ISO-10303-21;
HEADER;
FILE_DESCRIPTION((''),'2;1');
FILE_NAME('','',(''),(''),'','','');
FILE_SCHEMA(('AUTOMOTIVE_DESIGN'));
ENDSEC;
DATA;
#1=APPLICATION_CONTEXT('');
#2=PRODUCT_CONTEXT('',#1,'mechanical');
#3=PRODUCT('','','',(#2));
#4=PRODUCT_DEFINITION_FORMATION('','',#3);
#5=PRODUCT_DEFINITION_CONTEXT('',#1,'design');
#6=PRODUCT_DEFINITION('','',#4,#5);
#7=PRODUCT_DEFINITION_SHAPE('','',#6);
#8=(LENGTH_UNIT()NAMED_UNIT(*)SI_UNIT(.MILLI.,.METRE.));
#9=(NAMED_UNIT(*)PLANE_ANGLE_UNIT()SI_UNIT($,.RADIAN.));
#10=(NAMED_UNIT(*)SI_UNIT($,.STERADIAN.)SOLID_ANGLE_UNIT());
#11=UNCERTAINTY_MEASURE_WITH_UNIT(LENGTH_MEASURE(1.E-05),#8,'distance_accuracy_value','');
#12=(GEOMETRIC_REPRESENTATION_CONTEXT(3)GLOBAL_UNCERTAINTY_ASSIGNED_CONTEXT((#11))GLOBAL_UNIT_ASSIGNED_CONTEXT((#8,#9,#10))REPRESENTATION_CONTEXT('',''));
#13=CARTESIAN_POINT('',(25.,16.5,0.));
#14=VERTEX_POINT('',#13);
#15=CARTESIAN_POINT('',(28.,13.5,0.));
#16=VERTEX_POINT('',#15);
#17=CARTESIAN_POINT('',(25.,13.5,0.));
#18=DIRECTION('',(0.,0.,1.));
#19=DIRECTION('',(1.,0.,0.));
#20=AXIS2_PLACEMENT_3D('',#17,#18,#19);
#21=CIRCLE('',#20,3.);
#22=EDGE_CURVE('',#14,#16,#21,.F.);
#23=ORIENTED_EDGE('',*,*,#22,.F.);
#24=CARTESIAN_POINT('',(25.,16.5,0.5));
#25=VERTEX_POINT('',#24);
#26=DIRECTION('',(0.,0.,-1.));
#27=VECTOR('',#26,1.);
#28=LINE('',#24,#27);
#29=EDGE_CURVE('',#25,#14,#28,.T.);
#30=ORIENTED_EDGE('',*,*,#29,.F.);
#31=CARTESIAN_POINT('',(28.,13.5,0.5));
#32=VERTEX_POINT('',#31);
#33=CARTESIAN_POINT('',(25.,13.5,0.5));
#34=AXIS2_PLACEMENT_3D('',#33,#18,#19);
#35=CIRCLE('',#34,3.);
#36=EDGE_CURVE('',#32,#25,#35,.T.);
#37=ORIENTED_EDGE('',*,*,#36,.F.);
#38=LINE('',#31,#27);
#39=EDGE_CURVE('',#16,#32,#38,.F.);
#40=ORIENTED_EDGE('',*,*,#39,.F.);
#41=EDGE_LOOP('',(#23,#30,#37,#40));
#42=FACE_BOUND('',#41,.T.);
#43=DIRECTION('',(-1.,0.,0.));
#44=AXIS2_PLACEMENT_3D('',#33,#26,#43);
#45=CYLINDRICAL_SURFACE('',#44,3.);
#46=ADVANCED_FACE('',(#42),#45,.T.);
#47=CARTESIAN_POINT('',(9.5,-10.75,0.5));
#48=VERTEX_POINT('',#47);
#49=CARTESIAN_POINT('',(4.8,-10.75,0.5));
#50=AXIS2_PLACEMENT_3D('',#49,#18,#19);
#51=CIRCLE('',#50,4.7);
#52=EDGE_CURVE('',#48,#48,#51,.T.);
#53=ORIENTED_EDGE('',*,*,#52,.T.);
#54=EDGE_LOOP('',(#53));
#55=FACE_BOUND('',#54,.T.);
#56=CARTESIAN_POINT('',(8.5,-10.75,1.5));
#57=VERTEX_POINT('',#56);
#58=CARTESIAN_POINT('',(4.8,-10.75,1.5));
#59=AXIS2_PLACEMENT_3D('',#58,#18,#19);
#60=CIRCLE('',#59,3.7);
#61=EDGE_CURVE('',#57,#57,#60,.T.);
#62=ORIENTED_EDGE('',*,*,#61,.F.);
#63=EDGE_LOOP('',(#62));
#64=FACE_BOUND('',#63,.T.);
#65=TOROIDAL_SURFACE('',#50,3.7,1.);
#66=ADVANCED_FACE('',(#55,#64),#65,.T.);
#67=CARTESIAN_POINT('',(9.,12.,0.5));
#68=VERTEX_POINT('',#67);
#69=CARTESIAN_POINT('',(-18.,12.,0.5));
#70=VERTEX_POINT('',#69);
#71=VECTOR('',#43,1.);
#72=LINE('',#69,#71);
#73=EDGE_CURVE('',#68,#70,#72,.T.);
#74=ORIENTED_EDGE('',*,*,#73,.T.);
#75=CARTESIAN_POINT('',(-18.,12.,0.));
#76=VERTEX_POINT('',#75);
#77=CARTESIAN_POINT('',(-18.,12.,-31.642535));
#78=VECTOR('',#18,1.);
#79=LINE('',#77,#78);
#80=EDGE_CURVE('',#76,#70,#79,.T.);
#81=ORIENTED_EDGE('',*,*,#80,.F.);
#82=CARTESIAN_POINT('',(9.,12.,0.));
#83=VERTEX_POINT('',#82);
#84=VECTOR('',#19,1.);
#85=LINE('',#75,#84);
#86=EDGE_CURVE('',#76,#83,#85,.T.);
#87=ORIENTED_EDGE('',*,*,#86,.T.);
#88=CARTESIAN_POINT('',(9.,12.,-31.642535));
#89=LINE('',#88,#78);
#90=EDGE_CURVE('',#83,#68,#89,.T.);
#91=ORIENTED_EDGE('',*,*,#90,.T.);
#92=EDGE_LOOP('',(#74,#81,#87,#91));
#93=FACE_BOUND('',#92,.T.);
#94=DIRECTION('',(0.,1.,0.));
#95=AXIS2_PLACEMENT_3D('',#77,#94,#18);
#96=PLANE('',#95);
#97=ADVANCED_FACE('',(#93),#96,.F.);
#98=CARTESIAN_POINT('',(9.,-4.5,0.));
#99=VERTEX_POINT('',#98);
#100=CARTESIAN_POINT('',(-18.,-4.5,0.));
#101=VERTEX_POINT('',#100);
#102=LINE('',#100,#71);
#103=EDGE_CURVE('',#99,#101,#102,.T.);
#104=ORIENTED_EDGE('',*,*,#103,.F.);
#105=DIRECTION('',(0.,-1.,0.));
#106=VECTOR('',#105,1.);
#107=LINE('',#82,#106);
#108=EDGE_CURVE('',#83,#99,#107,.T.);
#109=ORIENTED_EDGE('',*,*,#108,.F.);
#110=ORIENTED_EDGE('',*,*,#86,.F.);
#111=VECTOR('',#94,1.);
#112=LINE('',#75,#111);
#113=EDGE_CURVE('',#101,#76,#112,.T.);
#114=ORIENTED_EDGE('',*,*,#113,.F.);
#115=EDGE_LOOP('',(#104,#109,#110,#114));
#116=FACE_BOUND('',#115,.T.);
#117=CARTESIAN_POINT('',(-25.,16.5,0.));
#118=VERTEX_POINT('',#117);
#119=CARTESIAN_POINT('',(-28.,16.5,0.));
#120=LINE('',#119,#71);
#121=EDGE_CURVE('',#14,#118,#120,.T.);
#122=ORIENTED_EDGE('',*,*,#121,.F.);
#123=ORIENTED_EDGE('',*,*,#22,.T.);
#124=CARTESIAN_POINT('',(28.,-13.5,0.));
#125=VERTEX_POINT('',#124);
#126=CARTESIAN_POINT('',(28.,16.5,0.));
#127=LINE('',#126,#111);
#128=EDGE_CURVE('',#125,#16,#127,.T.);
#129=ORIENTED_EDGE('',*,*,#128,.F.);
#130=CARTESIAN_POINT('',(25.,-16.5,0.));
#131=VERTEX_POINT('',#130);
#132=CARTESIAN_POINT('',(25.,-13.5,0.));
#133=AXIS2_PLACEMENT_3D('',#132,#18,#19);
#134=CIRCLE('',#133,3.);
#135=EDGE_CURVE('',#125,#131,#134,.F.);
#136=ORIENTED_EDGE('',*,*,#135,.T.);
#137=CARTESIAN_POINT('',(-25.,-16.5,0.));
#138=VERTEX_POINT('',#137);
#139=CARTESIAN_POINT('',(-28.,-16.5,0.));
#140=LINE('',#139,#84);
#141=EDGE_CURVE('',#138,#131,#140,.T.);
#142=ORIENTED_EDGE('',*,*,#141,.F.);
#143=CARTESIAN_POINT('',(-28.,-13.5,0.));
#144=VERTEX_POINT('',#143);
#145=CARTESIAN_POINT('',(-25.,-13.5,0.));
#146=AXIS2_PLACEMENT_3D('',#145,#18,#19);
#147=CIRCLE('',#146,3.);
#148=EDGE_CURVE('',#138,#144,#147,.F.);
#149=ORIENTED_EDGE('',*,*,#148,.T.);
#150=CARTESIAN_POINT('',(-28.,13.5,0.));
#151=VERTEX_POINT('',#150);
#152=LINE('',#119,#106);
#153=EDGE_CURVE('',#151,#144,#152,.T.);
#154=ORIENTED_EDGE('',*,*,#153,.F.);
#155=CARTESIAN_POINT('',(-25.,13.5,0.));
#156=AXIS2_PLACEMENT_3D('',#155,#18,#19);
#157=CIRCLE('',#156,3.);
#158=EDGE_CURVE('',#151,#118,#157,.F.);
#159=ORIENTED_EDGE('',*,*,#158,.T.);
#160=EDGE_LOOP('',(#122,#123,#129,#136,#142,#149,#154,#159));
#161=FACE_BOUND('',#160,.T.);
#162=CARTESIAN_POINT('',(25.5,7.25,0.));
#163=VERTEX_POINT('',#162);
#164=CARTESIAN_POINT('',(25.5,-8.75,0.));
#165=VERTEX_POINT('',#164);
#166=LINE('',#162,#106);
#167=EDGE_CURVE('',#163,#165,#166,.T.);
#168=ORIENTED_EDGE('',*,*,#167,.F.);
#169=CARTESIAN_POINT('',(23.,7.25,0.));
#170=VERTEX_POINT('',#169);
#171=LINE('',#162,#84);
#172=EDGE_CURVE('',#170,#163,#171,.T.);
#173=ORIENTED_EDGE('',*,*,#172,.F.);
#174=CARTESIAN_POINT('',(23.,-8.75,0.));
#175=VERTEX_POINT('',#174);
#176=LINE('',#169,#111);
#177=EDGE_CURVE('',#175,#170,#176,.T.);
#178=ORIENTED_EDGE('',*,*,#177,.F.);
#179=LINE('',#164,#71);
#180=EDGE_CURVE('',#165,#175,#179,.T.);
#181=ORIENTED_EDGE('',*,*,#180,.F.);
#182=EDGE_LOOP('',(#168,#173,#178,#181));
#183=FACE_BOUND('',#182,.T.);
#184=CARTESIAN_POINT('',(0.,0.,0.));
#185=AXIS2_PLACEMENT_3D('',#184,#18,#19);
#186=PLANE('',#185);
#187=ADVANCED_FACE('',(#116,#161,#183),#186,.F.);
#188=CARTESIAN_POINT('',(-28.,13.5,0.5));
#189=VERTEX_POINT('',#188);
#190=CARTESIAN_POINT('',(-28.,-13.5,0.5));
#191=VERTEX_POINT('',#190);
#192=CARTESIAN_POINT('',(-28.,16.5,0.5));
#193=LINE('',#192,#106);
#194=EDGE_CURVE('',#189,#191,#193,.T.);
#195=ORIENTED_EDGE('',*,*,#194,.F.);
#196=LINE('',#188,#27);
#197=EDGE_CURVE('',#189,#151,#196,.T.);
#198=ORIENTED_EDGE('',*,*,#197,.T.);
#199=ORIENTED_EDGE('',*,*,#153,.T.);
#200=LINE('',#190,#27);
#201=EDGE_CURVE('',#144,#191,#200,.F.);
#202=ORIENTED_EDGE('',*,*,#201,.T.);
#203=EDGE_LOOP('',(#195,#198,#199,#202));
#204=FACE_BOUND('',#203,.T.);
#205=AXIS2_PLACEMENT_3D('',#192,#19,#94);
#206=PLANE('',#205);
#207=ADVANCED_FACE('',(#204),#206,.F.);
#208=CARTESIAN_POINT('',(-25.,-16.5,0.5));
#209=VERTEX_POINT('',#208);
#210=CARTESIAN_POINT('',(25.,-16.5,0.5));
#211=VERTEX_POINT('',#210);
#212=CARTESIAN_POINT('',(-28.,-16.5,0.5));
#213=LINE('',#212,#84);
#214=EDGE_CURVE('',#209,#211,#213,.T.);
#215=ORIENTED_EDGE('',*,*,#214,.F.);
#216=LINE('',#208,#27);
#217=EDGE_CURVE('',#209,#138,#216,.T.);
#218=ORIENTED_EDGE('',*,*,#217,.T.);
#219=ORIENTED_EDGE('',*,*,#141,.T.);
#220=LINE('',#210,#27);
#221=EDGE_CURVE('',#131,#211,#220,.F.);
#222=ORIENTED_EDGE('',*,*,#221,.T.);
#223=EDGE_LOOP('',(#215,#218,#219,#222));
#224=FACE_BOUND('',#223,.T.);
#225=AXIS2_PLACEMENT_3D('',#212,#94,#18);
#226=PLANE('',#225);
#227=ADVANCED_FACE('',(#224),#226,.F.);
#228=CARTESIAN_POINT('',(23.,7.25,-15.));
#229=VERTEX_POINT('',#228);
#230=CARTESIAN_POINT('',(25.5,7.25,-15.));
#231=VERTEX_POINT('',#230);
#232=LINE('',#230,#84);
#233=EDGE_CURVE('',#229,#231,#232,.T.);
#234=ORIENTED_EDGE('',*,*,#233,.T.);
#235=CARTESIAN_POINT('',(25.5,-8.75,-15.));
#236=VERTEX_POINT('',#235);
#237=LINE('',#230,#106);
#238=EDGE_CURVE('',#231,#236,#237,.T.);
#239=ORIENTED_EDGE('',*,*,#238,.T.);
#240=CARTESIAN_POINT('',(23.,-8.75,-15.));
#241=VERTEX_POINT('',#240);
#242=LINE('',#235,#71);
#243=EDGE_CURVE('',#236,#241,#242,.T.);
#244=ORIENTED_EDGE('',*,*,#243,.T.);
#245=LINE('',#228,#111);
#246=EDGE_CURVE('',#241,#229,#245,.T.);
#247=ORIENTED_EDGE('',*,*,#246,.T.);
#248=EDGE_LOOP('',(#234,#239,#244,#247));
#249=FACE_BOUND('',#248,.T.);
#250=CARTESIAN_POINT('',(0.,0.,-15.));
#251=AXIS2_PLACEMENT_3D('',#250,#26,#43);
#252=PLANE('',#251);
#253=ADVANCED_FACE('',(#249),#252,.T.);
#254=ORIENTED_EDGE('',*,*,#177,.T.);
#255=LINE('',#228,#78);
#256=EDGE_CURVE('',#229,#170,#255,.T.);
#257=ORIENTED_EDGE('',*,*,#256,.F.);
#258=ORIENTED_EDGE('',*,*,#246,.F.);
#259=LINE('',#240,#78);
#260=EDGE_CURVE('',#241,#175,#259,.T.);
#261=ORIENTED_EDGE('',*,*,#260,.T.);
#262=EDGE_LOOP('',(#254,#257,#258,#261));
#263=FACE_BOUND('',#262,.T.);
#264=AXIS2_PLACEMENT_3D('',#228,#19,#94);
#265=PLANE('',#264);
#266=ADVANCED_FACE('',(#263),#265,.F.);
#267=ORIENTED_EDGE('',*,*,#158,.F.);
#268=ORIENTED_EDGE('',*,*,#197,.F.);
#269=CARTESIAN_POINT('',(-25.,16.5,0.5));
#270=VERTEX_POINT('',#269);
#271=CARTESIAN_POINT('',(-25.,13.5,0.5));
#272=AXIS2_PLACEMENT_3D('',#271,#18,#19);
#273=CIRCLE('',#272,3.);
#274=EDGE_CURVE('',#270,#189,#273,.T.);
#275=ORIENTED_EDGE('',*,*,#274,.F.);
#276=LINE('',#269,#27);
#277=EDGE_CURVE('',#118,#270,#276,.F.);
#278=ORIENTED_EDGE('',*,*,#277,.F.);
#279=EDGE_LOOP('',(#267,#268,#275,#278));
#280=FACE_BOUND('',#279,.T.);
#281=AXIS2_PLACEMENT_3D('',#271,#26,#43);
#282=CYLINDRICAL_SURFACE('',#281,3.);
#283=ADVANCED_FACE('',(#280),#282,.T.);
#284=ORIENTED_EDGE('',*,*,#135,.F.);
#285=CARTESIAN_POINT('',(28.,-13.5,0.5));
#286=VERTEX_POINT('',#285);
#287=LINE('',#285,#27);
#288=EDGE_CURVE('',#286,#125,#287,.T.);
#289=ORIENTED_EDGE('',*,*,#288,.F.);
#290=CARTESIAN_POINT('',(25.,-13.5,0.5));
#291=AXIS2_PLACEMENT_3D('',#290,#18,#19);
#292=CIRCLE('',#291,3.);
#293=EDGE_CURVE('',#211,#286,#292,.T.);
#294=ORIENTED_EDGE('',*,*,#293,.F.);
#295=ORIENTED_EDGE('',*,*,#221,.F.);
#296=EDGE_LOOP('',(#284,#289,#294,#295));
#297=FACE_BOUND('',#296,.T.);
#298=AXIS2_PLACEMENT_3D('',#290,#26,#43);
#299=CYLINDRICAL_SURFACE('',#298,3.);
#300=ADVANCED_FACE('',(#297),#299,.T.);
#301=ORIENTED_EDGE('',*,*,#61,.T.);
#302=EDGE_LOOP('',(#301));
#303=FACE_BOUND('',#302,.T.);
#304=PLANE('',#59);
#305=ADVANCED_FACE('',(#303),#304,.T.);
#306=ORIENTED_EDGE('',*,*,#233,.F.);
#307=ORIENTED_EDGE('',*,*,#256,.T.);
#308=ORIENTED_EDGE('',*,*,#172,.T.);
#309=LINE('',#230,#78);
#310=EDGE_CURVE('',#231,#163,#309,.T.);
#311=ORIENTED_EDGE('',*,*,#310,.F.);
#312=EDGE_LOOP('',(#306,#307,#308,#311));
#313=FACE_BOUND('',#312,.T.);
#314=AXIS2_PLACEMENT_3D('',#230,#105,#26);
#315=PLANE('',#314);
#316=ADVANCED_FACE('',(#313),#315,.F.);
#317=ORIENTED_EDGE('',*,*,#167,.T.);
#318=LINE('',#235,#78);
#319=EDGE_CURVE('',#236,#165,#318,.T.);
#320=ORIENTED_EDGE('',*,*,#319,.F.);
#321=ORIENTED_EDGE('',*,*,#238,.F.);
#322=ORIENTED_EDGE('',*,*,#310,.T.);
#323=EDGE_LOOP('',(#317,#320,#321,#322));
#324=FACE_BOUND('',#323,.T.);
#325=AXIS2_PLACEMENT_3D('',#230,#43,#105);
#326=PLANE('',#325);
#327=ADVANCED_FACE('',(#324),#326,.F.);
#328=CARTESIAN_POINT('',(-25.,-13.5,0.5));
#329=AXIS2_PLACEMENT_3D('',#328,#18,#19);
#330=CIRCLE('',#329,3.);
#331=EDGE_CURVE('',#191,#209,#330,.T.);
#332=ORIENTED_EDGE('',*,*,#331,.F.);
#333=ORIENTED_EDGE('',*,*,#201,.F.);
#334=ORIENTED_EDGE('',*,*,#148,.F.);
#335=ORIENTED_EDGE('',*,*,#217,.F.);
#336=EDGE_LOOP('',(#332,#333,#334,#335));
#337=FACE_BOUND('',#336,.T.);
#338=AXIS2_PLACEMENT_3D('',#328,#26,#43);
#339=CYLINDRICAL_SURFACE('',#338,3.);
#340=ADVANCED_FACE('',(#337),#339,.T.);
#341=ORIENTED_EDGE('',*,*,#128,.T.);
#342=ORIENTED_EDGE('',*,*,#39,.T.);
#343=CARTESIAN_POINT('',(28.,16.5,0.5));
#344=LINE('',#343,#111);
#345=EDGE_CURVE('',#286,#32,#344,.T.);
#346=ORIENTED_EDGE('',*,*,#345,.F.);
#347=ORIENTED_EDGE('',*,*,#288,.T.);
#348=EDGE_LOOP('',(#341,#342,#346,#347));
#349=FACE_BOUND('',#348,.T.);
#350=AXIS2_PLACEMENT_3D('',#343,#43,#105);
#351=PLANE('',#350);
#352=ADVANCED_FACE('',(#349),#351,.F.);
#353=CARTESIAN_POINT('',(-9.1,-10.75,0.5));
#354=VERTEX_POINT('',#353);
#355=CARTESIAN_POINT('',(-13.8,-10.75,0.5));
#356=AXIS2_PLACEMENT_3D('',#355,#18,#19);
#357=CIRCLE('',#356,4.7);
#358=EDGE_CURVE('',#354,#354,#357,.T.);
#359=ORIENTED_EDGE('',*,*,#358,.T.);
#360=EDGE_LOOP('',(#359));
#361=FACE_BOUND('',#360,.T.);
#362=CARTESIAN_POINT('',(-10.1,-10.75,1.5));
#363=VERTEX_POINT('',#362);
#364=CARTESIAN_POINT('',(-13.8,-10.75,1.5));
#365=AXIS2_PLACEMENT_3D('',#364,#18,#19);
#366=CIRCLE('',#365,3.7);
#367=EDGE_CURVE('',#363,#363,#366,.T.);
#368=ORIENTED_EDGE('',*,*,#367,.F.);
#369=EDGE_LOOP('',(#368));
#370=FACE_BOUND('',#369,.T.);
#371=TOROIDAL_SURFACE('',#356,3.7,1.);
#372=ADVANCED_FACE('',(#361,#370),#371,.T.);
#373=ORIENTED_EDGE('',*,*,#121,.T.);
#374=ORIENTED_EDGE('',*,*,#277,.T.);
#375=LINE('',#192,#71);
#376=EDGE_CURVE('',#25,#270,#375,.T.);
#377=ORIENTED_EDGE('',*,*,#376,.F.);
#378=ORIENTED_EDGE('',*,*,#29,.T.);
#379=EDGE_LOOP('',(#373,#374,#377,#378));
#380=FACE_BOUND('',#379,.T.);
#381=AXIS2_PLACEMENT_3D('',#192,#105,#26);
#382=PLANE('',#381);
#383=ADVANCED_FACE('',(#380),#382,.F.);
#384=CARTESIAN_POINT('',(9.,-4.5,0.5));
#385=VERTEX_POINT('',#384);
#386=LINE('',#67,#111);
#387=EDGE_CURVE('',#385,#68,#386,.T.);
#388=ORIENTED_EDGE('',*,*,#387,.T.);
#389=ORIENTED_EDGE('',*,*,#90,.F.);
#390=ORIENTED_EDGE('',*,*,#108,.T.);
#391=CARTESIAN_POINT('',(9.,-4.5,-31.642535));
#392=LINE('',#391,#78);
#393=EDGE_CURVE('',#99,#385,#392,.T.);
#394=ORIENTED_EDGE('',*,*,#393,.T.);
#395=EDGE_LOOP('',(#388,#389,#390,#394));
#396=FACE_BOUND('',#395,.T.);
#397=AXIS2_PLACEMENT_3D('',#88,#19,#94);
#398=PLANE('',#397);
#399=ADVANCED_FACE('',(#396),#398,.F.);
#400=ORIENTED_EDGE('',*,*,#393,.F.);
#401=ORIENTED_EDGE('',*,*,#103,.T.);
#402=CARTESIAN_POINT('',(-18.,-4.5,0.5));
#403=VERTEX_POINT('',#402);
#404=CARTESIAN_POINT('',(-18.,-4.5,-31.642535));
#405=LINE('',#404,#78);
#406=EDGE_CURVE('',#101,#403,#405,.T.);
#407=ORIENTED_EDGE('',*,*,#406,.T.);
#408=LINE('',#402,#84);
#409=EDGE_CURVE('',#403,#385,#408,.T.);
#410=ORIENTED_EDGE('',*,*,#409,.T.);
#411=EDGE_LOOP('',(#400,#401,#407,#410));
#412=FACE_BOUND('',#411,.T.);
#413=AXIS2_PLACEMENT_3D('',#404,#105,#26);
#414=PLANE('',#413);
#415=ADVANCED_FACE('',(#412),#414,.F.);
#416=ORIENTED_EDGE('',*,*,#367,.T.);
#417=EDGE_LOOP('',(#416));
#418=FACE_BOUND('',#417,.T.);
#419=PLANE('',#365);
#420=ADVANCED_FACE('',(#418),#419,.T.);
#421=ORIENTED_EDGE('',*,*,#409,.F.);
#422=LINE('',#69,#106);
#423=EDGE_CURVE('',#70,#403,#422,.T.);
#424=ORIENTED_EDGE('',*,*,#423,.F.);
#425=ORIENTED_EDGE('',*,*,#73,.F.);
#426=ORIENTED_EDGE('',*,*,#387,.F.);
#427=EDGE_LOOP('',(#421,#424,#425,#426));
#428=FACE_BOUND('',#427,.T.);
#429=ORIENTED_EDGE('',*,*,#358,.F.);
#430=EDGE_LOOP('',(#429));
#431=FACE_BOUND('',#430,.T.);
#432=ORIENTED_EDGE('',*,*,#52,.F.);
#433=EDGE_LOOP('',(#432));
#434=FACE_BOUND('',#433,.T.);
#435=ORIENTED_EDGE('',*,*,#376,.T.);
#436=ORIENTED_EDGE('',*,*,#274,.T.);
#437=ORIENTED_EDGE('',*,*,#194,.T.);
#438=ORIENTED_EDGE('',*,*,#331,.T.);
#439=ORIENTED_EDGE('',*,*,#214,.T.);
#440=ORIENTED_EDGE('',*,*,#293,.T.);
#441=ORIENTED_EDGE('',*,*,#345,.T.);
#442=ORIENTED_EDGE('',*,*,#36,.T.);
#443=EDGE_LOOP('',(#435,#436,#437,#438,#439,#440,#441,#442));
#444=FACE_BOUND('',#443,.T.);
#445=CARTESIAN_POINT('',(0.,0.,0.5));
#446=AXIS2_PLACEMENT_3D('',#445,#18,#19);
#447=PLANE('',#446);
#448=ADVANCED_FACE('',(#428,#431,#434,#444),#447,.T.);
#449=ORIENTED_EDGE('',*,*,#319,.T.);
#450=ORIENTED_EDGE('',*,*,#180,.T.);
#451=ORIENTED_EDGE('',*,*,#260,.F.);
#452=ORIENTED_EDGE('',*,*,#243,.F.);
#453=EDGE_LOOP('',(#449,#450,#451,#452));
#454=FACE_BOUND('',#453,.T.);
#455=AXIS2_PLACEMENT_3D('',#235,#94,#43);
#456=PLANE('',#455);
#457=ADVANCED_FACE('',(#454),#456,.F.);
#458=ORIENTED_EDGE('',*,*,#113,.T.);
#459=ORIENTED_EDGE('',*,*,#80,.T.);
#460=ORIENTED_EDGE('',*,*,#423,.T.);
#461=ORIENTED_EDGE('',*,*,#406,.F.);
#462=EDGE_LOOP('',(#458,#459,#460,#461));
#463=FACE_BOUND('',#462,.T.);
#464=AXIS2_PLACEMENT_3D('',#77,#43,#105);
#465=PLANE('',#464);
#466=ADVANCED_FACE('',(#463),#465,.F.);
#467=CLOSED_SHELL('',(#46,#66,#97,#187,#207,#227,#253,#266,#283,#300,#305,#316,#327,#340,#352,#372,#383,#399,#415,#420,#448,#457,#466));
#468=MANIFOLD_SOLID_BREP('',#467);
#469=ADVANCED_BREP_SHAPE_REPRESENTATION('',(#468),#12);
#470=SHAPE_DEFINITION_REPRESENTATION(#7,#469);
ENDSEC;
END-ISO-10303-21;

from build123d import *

# Parameters (mm, degrees)
SKETCH1_W           = 56
SKETCH1_H           = 33
BOSS_EXTRUDE1_DEPTH = 0.5
SKETCH2_W           = 27
SKETCH2_H           = 16.5
CUT_EXTRUDE1_DEPTH  = 0.5
SKETCH3_R           = 4.7
BOSS_EXTRUDE2_DEPTH = 1
FILLET1_R           = 1
SKETCH4_W           = 2.5
SKETCH4_H           = 16
BOSS_EXTRUDE3_DEPTH = 15
FILLET2_R           = 3


with BuildPart() as part:
    # Sketch1 → Boss-Extrude1 (new body)
    with BuildSketch(Plane.XY):
        Rectangle(SKETCH1_W, SKETCH1_H)
    extrude(amount=BOSS_EXTRUDE1_DEPTH)

    # Sketch2 → Cut-Extrude1 (cut)
    with BuildSketch(Plane.XY.offset(0.5)):
        with Locations((-4.5, 3.75)):
            Rectangle(SKETCH2_W, SKETCH2_H)
    extrude(amount=-CUT_EXTRUDE1_DEPTH, mode=Mode.SUBTRACT)

    # Sketch3 → Boss-Extrude2 (add)
    with BuildSketch(Plane.XY.offset(0.5)):
        with Locations((-13.8, -10.75)):
            Circle(SKETCH3_R)
        with Locations((4.8, -10.75)):
            Circle(SKETCH3_R)
    extrude(amount=BOSS_EXTRUDE2_DEPTH)

    # Fillet1
    fillet1_edges = [part.edges().sort_by_distance(p)[0] for p in [
        (-18.5, -10.75, 1.5),
        (0.1, -10.75, 1.5),
    ]]
    fillet(fillet1_edges, radius=FILLET1_R - 0.0001)  # a hair under: the kernel refuses the full size

    # Sketch4 → Boss-Extrude3 (add)
    with BuildSketch(Plane(origin=(0, 0, 0), x_dir=(-1, 0, 0), z_dir=(0, 0, -1))):
        with Locations((-24.25, -0.75)):
            Rectangle(SKETCH4_W, SKETCH4_H)
    extrude(amount=BOSS_EXTRUDE3_DEPTH)

    # Fillet2
    fillet2_edges = [part.edges().sort_by_distance(p)[0] for p in [
        (28, -16.5, 0.25),
        (-28, -16.5, 0.25),
        (-28, 16.5, 0.25),
        (28, 16.5, 0.25),
    ]]
    fillet(fillet2_edges, radius=FILLET2_R)


solid = part.part
